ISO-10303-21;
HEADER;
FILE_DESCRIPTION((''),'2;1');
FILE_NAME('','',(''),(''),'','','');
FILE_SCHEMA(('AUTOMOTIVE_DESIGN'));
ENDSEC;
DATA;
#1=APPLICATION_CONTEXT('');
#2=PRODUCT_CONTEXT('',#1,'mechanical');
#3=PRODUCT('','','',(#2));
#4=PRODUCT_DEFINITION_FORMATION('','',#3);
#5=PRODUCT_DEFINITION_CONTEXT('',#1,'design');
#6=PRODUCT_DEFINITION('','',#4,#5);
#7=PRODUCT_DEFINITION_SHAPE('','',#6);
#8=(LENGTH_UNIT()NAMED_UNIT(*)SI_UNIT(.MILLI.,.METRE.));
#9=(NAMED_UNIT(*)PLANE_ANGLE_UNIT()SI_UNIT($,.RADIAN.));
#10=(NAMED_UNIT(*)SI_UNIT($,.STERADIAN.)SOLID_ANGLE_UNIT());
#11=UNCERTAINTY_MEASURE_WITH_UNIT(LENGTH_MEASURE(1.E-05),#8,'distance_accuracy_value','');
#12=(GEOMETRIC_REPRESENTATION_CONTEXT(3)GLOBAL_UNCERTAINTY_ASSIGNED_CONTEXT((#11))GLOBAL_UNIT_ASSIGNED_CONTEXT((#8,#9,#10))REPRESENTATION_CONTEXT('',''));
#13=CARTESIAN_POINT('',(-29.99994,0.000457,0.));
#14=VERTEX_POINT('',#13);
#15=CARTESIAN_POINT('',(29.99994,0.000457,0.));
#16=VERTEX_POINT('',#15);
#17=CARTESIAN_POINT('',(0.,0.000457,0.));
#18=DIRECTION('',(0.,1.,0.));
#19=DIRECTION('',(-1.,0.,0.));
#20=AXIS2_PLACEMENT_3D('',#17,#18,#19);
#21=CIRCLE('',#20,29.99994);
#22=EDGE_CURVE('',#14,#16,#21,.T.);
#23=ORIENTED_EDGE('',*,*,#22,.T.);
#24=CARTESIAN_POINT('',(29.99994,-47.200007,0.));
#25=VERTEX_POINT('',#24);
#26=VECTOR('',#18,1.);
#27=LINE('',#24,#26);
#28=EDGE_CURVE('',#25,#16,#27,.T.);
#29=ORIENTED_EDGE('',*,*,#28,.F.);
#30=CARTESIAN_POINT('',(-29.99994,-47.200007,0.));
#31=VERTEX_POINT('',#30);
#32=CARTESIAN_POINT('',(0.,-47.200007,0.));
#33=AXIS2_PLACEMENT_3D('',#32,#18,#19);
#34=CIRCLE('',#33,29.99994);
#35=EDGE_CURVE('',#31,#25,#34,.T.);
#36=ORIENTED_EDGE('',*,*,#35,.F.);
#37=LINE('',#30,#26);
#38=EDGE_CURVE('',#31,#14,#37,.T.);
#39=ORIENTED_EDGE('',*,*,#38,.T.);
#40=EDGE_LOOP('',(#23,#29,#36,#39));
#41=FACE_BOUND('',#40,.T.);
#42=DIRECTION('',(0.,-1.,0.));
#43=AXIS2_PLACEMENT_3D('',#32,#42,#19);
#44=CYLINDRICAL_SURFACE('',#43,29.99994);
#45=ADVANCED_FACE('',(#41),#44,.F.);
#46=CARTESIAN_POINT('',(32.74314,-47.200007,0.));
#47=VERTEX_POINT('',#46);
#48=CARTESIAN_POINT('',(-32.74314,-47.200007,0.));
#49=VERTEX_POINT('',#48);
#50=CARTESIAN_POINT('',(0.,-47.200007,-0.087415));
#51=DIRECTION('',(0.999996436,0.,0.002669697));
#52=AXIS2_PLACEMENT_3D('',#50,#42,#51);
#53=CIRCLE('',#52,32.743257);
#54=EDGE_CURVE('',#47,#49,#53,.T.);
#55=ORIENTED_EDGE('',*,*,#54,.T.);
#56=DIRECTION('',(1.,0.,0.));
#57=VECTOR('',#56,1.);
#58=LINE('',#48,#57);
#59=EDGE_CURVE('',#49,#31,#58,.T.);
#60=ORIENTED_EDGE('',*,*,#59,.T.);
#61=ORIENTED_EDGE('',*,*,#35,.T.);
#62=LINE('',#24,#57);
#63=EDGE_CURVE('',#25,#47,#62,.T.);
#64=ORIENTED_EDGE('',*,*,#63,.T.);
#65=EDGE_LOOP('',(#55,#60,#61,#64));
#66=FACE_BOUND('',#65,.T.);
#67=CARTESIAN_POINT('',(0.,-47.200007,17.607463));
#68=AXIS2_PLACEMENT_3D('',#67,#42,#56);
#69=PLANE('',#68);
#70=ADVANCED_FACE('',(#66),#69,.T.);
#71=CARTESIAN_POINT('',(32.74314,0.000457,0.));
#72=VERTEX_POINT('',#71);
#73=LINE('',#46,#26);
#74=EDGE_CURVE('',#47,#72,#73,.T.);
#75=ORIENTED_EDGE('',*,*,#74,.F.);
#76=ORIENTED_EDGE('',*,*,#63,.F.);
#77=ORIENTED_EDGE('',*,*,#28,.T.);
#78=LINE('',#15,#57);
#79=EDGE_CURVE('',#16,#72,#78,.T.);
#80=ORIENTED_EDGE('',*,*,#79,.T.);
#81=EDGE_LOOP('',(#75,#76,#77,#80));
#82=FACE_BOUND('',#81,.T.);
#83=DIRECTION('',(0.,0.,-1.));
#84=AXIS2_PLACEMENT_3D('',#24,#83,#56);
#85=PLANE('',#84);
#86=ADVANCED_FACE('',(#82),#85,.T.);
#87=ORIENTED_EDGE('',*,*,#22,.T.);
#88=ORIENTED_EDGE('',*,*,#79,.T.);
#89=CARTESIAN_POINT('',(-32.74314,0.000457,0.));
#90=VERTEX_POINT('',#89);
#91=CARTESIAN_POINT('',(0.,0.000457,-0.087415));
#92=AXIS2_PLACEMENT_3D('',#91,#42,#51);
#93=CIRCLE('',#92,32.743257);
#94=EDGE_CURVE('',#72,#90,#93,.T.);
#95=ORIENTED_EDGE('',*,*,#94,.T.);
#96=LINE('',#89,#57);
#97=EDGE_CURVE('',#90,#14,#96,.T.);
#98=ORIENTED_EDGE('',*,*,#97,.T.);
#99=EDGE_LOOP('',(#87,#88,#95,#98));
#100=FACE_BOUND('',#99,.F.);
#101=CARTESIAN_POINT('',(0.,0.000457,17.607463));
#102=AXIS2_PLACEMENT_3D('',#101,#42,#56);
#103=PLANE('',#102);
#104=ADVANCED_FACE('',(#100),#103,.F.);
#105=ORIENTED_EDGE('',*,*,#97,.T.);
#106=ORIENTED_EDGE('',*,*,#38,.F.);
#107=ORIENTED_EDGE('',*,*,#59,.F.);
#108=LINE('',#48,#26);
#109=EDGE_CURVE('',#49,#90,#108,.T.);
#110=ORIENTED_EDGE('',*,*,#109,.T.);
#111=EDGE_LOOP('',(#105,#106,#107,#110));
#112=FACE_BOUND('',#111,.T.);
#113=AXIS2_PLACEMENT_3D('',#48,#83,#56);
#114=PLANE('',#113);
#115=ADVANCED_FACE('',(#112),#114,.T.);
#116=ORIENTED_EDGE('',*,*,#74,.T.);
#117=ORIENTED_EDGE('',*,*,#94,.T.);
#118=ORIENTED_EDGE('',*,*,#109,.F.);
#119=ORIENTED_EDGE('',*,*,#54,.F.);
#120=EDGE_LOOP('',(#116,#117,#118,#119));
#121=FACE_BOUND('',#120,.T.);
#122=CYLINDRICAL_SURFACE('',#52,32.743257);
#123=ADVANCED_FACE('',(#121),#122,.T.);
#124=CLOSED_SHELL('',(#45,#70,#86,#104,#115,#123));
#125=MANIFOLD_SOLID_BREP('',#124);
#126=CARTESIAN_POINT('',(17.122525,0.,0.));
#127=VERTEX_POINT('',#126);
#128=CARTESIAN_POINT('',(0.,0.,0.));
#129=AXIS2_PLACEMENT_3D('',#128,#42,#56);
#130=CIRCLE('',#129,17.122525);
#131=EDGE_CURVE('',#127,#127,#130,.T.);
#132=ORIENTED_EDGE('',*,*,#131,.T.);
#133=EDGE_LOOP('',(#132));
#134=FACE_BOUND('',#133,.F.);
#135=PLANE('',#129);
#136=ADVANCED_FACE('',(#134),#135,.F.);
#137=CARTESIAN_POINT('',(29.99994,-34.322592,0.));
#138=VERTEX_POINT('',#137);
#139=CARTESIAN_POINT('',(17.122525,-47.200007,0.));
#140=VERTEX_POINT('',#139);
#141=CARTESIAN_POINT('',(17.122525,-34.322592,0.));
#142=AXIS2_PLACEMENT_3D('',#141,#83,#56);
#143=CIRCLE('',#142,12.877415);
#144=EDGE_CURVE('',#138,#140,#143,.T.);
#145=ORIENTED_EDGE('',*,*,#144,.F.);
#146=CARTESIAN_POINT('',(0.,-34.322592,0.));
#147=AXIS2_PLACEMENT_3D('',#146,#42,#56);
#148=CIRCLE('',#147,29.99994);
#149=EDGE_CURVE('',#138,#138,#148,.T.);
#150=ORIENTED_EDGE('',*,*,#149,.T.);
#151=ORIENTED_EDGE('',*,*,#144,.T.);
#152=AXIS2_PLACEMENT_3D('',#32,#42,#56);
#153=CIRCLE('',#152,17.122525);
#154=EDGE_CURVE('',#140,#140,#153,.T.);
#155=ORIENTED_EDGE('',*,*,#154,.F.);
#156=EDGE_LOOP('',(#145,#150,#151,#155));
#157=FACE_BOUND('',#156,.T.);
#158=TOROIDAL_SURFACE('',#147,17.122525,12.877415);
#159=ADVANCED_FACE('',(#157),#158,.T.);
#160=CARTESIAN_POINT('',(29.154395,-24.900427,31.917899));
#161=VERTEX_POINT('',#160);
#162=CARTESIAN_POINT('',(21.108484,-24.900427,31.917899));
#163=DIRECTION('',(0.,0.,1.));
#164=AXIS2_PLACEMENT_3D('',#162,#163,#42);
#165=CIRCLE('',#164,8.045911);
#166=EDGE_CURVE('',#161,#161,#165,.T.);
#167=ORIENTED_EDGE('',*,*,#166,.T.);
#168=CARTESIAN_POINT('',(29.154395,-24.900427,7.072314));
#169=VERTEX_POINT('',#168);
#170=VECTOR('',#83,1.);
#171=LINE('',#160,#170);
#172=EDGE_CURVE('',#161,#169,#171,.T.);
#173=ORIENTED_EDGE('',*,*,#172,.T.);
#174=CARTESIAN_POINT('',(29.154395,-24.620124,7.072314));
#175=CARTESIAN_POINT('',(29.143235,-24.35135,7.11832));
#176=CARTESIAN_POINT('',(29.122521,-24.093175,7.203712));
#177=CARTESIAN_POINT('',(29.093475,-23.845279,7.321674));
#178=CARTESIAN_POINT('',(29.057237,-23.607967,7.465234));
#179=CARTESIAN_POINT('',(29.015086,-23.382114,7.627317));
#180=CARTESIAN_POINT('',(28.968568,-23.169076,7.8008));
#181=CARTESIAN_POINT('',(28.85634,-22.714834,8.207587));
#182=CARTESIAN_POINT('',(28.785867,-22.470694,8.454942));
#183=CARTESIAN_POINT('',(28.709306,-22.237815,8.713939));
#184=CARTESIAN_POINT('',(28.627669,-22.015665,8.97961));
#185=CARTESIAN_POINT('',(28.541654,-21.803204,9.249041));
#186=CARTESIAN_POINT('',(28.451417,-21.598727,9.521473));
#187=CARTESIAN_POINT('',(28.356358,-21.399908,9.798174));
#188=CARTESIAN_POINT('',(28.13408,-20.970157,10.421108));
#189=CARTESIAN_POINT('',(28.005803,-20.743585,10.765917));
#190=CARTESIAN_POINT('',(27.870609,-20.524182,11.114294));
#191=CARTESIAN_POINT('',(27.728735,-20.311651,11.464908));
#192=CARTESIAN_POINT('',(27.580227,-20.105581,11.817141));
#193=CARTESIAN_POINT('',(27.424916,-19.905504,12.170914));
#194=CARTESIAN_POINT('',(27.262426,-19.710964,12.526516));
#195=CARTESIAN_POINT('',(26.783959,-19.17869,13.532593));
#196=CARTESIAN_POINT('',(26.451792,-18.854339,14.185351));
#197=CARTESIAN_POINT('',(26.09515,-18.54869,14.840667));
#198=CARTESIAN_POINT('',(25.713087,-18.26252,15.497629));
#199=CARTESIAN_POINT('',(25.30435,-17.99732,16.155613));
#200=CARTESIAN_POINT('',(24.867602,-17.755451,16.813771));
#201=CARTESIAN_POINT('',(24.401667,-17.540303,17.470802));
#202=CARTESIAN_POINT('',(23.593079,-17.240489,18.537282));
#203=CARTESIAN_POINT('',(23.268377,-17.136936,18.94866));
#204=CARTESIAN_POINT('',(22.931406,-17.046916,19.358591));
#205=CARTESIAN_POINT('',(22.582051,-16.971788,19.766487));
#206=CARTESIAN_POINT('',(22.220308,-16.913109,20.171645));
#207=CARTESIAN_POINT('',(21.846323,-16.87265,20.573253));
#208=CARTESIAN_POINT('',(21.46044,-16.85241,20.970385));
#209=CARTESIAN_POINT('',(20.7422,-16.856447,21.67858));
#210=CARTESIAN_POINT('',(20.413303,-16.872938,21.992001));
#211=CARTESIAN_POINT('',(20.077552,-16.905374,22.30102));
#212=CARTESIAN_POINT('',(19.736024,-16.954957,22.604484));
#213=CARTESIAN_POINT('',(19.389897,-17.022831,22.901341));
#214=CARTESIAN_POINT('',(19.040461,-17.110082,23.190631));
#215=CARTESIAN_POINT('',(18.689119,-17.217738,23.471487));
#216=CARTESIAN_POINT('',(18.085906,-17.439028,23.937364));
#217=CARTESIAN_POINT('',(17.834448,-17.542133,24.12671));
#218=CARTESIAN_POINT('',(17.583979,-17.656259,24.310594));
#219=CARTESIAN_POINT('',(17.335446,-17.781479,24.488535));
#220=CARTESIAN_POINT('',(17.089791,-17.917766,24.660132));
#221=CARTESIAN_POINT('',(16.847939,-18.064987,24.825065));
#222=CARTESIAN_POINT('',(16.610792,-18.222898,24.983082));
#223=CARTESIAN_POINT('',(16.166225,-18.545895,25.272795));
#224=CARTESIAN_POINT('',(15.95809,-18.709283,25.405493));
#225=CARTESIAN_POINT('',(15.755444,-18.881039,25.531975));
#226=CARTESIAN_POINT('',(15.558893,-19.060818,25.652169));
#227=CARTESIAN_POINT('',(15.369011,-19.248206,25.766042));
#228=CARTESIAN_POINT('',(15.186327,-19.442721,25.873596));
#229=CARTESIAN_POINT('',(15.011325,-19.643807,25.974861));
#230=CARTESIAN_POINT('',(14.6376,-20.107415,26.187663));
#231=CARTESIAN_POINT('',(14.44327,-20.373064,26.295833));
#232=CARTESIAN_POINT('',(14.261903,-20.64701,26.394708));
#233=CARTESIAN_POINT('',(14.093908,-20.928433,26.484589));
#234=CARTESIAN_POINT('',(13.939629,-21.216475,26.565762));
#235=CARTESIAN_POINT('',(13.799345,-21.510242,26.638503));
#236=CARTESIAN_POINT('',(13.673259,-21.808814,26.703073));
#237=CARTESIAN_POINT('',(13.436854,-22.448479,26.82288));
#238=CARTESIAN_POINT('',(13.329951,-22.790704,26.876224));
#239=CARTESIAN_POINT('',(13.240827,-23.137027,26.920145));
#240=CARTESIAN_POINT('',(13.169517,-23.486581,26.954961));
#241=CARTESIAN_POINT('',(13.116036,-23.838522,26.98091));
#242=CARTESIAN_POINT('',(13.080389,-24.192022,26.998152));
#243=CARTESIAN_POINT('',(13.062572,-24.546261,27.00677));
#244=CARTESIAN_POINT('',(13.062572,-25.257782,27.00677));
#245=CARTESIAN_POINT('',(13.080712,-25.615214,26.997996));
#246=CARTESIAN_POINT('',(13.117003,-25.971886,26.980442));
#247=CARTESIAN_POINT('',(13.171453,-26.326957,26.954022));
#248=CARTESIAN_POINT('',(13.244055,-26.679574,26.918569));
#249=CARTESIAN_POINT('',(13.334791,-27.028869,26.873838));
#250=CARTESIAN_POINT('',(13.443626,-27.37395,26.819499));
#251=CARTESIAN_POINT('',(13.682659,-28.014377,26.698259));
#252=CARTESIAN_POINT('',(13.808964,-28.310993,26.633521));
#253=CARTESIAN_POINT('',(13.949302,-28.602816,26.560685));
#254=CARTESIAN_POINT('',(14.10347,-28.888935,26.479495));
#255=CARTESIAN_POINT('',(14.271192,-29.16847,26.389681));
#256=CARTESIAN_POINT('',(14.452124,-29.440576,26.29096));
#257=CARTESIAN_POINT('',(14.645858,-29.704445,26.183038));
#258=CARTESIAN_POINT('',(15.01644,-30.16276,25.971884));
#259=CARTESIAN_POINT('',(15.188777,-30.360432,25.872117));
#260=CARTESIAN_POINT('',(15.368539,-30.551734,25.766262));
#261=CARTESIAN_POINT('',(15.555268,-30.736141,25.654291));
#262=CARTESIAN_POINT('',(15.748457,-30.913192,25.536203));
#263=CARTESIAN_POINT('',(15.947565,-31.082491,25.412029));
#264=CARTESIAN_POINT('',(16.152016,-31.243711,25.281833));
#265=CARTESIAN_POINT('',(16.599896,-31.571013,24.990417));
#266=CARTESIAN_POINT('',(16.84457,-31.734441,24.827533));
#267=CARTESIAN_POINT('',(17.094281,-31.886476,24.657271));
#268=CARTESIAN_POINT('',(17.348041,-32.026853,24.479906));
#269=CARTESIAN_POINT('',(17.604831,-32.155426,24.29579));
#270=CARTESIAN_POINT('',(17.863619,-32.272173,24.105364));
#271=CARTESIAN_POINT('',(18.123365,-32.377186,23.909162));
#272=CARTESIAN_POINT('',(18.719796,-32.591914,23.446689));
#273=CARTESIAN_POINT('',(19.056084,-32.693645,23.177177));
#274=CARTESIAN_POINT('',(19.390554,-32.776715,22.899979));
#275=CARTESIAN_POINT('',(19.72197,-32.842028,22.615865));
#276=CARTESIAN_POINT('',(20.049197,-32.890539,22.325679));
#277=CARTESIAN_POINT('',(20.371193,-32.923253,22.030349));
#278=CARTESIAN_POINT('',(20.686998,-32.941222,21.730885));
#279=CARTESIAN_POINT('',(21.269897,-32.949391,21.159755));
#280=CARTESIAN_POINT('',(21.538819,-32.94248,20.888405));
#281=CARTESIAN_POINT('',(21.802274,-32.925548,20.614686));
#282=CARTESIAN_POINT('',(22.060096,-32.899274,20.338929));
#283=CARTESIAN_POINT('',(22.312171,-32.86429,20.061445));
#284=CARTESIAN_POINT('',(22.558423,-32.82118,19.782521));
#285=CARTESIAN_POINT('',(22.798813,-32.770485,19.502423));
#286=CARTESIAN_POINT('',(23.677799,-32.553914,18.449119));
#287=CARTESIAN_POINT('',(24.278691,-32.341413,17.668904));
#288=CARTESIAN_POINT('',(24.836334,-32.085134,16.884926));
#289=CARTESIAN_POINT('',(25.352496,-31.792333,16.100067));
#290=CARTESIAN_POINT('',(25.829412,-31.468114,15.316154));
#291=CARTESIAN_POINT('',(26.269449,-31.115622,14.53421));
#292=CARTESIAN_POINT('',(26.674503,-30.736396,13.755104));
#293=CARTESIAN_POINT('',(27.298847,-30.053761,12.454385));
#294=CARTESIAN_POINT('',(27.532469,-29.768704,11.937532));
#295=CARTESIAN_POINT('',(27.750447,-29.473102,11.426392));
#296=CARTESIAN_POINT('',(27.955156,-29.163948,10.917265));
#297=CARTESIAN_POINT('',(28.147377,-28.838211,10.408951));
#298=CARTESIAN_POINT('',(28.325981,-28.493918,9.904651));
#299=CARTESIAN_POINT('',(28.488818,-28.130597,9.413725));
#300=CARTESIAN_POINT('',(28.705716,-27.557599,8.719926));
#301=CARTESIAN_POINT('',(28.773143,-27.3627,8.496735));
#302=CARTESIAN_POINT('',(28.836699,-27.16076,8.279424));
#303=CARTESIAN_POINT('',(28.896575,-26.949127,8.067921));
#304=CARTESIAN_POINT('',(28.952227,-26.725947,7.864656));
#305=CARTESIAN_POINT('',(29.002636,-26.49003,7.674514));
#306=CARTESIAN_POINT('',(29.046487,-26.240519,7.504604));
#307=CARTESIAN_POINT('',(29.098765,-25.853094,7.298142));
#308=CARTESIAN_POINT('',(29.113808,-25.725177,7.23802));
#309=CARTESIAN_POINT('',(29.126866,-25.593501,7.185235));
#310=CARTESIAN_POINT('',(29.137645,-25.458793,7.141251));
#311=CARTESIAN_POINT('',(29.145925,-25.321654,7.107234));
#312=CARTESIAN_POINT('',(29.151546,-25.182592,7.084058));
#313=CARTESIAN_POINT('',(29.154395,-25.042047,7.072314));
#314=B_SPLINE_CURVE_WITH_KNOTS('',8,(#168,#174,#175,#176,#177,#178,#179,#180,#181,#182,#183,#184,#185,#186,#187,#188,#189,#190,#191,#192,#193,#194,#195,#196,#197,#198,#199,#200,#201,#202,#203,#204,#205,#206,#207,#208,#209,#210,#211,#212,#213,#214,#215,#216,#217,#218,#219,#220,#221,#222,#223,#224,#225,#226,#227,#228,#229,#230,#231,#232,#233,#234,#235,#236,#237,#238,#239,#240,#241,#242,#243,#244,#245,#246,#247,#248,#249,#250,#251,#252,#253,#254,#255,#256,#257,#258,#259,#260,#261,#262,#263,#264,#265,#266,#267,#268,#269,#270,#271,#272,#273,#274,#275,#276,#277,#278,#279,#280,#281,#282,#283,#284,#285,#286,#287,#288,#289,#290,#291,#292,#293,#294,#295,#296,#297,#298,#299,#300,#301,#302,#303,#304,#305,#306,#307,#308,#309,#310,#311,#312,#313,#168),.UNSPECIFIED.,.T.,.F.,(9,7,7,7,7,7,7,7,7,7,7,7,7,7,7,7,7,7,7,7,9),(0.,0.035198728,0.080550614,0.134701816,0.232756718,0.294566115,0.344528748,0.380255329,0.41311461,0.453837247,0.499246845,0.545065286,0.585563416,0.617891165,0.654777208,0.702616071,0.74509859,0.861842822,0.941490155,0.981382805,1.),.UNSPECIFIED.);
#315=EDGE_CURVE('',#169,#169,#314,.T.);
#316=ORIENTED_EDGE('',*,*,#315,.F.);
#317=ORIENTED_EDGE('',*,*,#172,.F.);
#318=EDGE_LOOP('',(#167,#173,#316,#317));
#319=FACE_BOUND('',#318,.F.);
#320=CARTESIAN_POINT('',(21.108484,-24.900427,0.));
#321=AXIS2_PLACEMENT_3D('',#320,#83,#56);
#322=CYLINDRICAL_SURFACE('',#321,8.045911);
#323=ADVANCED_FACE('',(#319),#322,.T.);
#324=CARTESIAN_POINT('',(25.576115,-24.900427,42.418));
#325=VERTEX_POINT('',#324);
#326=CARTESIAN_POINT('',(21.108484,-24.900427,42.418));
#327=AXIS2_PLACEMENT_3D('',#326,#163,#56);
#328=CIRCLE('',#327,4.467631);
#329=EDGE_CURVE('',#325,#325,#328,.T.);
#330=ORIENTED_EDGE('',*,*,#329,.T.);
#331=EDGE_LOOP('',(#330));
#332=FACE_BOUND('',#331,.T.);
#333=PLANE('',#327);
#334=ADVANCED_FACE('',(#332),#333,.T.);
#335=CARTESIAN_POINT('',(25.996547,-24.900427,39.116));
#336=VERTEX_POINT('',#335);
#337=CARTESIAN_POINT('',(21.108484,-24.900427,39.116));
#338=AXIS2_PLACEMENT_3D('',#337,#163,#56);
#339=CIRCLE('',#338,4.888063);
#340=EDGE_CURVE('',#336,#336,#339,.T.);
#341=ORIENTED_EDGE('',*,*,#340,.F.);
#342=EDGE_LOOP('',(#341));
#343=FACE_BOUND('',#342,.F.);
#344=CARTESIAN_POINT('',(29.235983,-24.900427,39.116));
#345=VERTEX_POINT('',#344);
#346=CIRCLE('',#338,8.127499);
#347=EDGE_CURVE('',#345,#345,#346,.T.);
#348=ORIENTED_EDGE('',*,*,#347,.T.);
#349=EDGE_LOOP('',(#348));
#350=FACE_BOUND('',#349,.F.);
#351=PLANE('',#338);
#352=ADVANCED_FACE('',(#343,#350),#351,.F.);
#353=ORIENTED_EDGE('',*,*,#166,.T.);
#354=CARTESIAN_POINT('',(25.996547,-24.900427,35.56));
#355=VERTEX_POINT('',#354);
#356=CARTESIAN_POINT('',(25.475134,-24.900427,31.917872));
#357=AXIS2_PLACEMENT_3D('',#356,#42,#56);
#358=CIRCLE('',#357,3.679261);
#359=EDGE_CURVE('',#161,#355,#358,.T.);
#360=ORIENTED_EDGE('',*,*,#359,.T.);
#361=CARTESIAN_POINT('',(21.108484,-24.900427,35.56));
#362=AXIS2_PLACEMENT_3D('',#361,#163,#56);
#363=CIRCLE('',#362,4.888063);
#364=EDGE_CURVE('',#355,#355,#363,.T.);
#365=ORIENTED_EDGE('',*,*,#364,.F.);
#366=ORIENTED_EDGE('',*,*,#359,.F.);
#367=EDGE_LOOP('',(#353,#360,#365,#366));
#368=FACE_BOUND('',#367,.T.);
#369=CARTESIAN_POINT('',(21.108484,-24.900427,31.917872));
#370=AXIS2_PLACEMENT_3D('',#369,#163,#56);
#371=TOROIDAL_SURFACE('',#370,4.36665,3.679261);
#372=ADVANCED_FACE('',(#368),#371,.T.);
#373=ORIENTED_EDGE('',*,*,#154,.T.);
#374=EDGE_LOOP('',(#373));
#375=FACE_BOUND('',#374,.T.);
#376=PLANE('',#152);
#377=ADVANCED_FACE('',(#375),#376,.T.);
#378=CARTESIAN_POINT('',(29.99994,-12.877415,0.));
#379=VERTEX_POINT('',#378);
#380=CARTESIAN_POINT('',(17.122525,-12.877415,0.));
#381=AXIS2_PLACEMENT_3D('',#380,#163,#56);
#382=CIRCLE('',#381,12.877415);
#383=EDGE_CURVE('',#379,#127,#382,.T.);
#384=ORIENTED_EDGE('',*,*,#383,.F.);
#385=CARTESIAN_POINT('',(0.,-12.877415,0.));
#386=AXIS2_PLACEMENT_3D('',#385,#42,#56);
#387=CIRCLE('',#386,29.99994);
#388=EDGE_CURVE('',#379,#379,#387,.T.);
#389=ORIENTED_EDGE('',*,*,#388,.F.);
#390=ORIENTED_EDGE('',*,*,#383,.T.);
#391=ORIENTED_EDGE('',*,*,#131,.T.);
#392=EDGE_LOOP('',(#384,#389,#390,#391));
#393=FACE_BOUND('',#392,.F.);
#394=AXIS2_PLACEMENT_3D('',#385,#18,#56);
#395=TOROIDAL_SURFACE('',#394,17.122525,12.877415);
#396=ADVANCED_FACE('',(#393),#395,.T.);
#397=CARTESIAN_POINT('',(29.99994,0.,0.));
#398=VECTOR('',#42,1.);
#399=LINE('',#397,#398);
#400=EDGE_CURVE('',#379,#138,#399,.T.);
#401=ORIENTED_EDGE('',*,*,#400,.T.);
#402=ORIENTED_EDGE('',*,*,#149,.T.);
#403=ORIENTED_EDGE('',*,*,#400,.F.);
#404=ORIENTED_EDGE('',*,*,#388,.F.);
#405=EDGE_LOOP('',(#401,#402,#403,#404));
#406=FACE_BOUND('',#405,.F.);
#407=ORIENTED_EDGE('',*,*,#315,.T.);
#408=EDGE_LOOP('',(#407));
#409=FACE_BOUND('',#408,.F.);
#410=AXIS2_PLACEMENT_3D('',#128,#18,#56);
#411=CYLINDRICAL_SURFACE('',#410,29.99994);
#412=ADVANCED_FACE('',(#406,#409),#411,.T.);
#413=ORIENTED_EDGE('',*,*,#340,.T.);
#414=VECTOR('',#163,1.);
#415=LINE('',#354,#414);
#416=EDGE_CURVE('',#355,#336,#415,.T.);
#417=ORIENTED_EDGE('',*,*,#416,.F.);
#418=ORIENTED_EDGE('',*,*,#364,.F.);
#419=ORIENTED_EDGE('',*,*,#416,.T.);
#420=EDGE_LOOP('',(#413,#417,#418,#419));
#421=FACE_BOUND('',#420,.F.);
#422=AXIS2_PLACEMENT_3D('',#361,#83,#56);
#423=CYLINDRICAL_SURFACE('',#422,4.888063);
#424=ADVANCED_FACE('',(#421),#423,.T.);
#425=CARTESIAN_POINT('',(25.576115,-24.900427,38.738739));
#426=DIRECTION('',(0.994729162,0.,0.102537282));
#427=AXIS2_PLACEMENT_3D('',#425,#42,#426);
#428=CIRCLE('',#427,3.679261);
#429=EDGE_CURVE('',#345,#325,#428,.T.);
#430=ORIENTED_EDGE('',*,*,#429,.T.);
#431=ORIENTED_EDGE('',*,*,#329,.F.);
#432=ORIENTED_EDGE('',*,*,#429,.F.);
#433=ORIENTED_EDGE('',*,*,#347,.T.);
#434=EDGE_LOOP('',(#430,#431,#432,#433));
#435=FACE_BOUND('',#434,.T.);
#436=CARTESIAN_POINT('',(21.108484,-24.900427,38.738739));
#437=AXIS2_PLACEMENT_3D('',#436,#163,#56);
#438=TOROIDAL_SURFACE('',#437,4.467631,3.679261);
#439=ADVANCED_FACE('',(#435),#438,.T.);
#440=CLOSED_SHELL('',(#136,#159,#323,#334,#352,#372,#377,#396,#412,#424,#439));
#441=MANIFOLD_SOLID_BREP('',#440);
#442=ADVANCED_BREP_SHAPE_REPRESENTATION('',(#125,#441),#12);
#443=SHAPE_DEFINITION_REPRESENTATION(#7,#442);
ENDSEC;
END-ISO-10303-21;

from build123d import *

# Parameters (mm, degrees)
F0_R      = 29.99994
F1_DEPTH  = 47.2000072
F4_R      = 8.0459114743
F5_DEPTH  = 35.56
F6_R      = 4.8880627921
F7_DEPTH  = 3.556
F8_R      = 8.1274992905
F9_DEPTH  = 3.302
F11_DEPTH = 47.2004644
F12_R     = 12.8774151417


# Not quite as in the source:
# - a fillet or chamfer that OpenCascade refuses, or shapes differently, is made with other operations: its cross-section is extruded or revolved along the edge and cut away or added
# - the program builds the solid bodies; features that only make, move or delete a surface that nothing else refers to are left out


with BuildPart() as f1:
    # F0 (on Front) → F1 (new body)
    with BuildSketch(Plane.XZ):
        Circle(F0_R)
    extrude(amount=F1_DEPTH)

    # F4 (on Top) → F5 (join)
    with BuildSketch(Plane.XY):
        with Locations((21.1084838957, -24.9004270881)):
            Circle(F4_R)
    extrude(amount=F5_DEPTH)

    # F6 (on face) → F7 (join)
    with BuildSketch(Plane.XY.offset(35.56)):
        with Locations((21.1084838957, -24.9004270881)):
            Circle(F6_R)
    extrude(amount=F7_DEPTH)

    # F8 (on face) → F9 (join)
    with BuildSketch(Plane.XY.offset(39.116)):
        with Locations((21.1084838957, -24.9004270881)):
            Circle(F8_R)
    extrude(amount=F9_DEPTH)

    # F12
    f12_edges = [f1.edges().sort_by_distance(p)[0] for p in [
        (-29.99994, 0, 0),
        (-29.99994, -47.200007, 0),
    ]]
    fillet(f12_edges, radius=F12_R)

    # F13: fillet of radius 3.6792614691 on 1 edges, made by hand

    # F13_s1 → F13_t2 (revolve, cut)
    with BuildSketch(Plane.XZ.offset(24.9004270881)):
        with BuildLine():
            ThreePointArc((29.1543953699, 31.9178723714), (28.2550061042, 34.3281162367), (25.9965466878, 35.56))
            Line((25.9965466878, 35.56), (26.0069749435, 35.6328425526))
            ThreePointArc((26.0069749435, 35.6328425526), (27.5754710288, 35.6335852294), (29.1543953699, 35.6335852294))
            Line((29.1543953699, 35.6335852294), (29.2279805993, 35.56))
            Line((29.2279805993, 35.56), (29.2279805993, 31.9178723714))
            Line((29.2279805993, 31.9178723714), (29.1543953699, 31.9178723714))
        make_face()
    revolve(axis=Axis((21.1084838957, -24.9004270881, 35.56), (0, 0, 1)), mode=Mode.SUBTRACT)

    # F14: fillet of radius 3.6792614691 on 1 edges, made by hand

    # F14_s1 → F14_t2 (revolve, cut)
    with BuildSketch(Plane.XZ.offset(24.9004270881)):
        with BuildLine():
            ThreePointArc((29.2359831862, 39.116), (28.0407566088, 41.4704969888), (25.576114508, 42.418))
            Line((25.576114508, 42.418), (29.2359831862, 42.418))
            Line((29.2359831862, 42.418), (29.2359831862, 39.116))
        make_face()
    revolve(axis=Axis((21.1084838957, -24.9004270881, 42.418), (0, 0, 1)), mode=Mode.SUBTRACT)


with BuildPart() as f11:
    # F10 (on face) → F11 (new body)
    with BuildSketch(Plane.XZ.offset(47.2000072)):
        with BuildLine():
            ThreePointArc((-29.99994, 0), (0, 29.99994), (29.99994, 0))
            Line((29.99994, 0), (32.74314, 0))
            ThreePointArc((32.74314, 0), (0, 32.6558421266), (-32.74314, 0))
            Line((-32.74314, 0), (-29.99994, 0))
        make_face()
    extrude(amount=-F11_DEPTH)


solid = Compound([f1.part, f11.part])
